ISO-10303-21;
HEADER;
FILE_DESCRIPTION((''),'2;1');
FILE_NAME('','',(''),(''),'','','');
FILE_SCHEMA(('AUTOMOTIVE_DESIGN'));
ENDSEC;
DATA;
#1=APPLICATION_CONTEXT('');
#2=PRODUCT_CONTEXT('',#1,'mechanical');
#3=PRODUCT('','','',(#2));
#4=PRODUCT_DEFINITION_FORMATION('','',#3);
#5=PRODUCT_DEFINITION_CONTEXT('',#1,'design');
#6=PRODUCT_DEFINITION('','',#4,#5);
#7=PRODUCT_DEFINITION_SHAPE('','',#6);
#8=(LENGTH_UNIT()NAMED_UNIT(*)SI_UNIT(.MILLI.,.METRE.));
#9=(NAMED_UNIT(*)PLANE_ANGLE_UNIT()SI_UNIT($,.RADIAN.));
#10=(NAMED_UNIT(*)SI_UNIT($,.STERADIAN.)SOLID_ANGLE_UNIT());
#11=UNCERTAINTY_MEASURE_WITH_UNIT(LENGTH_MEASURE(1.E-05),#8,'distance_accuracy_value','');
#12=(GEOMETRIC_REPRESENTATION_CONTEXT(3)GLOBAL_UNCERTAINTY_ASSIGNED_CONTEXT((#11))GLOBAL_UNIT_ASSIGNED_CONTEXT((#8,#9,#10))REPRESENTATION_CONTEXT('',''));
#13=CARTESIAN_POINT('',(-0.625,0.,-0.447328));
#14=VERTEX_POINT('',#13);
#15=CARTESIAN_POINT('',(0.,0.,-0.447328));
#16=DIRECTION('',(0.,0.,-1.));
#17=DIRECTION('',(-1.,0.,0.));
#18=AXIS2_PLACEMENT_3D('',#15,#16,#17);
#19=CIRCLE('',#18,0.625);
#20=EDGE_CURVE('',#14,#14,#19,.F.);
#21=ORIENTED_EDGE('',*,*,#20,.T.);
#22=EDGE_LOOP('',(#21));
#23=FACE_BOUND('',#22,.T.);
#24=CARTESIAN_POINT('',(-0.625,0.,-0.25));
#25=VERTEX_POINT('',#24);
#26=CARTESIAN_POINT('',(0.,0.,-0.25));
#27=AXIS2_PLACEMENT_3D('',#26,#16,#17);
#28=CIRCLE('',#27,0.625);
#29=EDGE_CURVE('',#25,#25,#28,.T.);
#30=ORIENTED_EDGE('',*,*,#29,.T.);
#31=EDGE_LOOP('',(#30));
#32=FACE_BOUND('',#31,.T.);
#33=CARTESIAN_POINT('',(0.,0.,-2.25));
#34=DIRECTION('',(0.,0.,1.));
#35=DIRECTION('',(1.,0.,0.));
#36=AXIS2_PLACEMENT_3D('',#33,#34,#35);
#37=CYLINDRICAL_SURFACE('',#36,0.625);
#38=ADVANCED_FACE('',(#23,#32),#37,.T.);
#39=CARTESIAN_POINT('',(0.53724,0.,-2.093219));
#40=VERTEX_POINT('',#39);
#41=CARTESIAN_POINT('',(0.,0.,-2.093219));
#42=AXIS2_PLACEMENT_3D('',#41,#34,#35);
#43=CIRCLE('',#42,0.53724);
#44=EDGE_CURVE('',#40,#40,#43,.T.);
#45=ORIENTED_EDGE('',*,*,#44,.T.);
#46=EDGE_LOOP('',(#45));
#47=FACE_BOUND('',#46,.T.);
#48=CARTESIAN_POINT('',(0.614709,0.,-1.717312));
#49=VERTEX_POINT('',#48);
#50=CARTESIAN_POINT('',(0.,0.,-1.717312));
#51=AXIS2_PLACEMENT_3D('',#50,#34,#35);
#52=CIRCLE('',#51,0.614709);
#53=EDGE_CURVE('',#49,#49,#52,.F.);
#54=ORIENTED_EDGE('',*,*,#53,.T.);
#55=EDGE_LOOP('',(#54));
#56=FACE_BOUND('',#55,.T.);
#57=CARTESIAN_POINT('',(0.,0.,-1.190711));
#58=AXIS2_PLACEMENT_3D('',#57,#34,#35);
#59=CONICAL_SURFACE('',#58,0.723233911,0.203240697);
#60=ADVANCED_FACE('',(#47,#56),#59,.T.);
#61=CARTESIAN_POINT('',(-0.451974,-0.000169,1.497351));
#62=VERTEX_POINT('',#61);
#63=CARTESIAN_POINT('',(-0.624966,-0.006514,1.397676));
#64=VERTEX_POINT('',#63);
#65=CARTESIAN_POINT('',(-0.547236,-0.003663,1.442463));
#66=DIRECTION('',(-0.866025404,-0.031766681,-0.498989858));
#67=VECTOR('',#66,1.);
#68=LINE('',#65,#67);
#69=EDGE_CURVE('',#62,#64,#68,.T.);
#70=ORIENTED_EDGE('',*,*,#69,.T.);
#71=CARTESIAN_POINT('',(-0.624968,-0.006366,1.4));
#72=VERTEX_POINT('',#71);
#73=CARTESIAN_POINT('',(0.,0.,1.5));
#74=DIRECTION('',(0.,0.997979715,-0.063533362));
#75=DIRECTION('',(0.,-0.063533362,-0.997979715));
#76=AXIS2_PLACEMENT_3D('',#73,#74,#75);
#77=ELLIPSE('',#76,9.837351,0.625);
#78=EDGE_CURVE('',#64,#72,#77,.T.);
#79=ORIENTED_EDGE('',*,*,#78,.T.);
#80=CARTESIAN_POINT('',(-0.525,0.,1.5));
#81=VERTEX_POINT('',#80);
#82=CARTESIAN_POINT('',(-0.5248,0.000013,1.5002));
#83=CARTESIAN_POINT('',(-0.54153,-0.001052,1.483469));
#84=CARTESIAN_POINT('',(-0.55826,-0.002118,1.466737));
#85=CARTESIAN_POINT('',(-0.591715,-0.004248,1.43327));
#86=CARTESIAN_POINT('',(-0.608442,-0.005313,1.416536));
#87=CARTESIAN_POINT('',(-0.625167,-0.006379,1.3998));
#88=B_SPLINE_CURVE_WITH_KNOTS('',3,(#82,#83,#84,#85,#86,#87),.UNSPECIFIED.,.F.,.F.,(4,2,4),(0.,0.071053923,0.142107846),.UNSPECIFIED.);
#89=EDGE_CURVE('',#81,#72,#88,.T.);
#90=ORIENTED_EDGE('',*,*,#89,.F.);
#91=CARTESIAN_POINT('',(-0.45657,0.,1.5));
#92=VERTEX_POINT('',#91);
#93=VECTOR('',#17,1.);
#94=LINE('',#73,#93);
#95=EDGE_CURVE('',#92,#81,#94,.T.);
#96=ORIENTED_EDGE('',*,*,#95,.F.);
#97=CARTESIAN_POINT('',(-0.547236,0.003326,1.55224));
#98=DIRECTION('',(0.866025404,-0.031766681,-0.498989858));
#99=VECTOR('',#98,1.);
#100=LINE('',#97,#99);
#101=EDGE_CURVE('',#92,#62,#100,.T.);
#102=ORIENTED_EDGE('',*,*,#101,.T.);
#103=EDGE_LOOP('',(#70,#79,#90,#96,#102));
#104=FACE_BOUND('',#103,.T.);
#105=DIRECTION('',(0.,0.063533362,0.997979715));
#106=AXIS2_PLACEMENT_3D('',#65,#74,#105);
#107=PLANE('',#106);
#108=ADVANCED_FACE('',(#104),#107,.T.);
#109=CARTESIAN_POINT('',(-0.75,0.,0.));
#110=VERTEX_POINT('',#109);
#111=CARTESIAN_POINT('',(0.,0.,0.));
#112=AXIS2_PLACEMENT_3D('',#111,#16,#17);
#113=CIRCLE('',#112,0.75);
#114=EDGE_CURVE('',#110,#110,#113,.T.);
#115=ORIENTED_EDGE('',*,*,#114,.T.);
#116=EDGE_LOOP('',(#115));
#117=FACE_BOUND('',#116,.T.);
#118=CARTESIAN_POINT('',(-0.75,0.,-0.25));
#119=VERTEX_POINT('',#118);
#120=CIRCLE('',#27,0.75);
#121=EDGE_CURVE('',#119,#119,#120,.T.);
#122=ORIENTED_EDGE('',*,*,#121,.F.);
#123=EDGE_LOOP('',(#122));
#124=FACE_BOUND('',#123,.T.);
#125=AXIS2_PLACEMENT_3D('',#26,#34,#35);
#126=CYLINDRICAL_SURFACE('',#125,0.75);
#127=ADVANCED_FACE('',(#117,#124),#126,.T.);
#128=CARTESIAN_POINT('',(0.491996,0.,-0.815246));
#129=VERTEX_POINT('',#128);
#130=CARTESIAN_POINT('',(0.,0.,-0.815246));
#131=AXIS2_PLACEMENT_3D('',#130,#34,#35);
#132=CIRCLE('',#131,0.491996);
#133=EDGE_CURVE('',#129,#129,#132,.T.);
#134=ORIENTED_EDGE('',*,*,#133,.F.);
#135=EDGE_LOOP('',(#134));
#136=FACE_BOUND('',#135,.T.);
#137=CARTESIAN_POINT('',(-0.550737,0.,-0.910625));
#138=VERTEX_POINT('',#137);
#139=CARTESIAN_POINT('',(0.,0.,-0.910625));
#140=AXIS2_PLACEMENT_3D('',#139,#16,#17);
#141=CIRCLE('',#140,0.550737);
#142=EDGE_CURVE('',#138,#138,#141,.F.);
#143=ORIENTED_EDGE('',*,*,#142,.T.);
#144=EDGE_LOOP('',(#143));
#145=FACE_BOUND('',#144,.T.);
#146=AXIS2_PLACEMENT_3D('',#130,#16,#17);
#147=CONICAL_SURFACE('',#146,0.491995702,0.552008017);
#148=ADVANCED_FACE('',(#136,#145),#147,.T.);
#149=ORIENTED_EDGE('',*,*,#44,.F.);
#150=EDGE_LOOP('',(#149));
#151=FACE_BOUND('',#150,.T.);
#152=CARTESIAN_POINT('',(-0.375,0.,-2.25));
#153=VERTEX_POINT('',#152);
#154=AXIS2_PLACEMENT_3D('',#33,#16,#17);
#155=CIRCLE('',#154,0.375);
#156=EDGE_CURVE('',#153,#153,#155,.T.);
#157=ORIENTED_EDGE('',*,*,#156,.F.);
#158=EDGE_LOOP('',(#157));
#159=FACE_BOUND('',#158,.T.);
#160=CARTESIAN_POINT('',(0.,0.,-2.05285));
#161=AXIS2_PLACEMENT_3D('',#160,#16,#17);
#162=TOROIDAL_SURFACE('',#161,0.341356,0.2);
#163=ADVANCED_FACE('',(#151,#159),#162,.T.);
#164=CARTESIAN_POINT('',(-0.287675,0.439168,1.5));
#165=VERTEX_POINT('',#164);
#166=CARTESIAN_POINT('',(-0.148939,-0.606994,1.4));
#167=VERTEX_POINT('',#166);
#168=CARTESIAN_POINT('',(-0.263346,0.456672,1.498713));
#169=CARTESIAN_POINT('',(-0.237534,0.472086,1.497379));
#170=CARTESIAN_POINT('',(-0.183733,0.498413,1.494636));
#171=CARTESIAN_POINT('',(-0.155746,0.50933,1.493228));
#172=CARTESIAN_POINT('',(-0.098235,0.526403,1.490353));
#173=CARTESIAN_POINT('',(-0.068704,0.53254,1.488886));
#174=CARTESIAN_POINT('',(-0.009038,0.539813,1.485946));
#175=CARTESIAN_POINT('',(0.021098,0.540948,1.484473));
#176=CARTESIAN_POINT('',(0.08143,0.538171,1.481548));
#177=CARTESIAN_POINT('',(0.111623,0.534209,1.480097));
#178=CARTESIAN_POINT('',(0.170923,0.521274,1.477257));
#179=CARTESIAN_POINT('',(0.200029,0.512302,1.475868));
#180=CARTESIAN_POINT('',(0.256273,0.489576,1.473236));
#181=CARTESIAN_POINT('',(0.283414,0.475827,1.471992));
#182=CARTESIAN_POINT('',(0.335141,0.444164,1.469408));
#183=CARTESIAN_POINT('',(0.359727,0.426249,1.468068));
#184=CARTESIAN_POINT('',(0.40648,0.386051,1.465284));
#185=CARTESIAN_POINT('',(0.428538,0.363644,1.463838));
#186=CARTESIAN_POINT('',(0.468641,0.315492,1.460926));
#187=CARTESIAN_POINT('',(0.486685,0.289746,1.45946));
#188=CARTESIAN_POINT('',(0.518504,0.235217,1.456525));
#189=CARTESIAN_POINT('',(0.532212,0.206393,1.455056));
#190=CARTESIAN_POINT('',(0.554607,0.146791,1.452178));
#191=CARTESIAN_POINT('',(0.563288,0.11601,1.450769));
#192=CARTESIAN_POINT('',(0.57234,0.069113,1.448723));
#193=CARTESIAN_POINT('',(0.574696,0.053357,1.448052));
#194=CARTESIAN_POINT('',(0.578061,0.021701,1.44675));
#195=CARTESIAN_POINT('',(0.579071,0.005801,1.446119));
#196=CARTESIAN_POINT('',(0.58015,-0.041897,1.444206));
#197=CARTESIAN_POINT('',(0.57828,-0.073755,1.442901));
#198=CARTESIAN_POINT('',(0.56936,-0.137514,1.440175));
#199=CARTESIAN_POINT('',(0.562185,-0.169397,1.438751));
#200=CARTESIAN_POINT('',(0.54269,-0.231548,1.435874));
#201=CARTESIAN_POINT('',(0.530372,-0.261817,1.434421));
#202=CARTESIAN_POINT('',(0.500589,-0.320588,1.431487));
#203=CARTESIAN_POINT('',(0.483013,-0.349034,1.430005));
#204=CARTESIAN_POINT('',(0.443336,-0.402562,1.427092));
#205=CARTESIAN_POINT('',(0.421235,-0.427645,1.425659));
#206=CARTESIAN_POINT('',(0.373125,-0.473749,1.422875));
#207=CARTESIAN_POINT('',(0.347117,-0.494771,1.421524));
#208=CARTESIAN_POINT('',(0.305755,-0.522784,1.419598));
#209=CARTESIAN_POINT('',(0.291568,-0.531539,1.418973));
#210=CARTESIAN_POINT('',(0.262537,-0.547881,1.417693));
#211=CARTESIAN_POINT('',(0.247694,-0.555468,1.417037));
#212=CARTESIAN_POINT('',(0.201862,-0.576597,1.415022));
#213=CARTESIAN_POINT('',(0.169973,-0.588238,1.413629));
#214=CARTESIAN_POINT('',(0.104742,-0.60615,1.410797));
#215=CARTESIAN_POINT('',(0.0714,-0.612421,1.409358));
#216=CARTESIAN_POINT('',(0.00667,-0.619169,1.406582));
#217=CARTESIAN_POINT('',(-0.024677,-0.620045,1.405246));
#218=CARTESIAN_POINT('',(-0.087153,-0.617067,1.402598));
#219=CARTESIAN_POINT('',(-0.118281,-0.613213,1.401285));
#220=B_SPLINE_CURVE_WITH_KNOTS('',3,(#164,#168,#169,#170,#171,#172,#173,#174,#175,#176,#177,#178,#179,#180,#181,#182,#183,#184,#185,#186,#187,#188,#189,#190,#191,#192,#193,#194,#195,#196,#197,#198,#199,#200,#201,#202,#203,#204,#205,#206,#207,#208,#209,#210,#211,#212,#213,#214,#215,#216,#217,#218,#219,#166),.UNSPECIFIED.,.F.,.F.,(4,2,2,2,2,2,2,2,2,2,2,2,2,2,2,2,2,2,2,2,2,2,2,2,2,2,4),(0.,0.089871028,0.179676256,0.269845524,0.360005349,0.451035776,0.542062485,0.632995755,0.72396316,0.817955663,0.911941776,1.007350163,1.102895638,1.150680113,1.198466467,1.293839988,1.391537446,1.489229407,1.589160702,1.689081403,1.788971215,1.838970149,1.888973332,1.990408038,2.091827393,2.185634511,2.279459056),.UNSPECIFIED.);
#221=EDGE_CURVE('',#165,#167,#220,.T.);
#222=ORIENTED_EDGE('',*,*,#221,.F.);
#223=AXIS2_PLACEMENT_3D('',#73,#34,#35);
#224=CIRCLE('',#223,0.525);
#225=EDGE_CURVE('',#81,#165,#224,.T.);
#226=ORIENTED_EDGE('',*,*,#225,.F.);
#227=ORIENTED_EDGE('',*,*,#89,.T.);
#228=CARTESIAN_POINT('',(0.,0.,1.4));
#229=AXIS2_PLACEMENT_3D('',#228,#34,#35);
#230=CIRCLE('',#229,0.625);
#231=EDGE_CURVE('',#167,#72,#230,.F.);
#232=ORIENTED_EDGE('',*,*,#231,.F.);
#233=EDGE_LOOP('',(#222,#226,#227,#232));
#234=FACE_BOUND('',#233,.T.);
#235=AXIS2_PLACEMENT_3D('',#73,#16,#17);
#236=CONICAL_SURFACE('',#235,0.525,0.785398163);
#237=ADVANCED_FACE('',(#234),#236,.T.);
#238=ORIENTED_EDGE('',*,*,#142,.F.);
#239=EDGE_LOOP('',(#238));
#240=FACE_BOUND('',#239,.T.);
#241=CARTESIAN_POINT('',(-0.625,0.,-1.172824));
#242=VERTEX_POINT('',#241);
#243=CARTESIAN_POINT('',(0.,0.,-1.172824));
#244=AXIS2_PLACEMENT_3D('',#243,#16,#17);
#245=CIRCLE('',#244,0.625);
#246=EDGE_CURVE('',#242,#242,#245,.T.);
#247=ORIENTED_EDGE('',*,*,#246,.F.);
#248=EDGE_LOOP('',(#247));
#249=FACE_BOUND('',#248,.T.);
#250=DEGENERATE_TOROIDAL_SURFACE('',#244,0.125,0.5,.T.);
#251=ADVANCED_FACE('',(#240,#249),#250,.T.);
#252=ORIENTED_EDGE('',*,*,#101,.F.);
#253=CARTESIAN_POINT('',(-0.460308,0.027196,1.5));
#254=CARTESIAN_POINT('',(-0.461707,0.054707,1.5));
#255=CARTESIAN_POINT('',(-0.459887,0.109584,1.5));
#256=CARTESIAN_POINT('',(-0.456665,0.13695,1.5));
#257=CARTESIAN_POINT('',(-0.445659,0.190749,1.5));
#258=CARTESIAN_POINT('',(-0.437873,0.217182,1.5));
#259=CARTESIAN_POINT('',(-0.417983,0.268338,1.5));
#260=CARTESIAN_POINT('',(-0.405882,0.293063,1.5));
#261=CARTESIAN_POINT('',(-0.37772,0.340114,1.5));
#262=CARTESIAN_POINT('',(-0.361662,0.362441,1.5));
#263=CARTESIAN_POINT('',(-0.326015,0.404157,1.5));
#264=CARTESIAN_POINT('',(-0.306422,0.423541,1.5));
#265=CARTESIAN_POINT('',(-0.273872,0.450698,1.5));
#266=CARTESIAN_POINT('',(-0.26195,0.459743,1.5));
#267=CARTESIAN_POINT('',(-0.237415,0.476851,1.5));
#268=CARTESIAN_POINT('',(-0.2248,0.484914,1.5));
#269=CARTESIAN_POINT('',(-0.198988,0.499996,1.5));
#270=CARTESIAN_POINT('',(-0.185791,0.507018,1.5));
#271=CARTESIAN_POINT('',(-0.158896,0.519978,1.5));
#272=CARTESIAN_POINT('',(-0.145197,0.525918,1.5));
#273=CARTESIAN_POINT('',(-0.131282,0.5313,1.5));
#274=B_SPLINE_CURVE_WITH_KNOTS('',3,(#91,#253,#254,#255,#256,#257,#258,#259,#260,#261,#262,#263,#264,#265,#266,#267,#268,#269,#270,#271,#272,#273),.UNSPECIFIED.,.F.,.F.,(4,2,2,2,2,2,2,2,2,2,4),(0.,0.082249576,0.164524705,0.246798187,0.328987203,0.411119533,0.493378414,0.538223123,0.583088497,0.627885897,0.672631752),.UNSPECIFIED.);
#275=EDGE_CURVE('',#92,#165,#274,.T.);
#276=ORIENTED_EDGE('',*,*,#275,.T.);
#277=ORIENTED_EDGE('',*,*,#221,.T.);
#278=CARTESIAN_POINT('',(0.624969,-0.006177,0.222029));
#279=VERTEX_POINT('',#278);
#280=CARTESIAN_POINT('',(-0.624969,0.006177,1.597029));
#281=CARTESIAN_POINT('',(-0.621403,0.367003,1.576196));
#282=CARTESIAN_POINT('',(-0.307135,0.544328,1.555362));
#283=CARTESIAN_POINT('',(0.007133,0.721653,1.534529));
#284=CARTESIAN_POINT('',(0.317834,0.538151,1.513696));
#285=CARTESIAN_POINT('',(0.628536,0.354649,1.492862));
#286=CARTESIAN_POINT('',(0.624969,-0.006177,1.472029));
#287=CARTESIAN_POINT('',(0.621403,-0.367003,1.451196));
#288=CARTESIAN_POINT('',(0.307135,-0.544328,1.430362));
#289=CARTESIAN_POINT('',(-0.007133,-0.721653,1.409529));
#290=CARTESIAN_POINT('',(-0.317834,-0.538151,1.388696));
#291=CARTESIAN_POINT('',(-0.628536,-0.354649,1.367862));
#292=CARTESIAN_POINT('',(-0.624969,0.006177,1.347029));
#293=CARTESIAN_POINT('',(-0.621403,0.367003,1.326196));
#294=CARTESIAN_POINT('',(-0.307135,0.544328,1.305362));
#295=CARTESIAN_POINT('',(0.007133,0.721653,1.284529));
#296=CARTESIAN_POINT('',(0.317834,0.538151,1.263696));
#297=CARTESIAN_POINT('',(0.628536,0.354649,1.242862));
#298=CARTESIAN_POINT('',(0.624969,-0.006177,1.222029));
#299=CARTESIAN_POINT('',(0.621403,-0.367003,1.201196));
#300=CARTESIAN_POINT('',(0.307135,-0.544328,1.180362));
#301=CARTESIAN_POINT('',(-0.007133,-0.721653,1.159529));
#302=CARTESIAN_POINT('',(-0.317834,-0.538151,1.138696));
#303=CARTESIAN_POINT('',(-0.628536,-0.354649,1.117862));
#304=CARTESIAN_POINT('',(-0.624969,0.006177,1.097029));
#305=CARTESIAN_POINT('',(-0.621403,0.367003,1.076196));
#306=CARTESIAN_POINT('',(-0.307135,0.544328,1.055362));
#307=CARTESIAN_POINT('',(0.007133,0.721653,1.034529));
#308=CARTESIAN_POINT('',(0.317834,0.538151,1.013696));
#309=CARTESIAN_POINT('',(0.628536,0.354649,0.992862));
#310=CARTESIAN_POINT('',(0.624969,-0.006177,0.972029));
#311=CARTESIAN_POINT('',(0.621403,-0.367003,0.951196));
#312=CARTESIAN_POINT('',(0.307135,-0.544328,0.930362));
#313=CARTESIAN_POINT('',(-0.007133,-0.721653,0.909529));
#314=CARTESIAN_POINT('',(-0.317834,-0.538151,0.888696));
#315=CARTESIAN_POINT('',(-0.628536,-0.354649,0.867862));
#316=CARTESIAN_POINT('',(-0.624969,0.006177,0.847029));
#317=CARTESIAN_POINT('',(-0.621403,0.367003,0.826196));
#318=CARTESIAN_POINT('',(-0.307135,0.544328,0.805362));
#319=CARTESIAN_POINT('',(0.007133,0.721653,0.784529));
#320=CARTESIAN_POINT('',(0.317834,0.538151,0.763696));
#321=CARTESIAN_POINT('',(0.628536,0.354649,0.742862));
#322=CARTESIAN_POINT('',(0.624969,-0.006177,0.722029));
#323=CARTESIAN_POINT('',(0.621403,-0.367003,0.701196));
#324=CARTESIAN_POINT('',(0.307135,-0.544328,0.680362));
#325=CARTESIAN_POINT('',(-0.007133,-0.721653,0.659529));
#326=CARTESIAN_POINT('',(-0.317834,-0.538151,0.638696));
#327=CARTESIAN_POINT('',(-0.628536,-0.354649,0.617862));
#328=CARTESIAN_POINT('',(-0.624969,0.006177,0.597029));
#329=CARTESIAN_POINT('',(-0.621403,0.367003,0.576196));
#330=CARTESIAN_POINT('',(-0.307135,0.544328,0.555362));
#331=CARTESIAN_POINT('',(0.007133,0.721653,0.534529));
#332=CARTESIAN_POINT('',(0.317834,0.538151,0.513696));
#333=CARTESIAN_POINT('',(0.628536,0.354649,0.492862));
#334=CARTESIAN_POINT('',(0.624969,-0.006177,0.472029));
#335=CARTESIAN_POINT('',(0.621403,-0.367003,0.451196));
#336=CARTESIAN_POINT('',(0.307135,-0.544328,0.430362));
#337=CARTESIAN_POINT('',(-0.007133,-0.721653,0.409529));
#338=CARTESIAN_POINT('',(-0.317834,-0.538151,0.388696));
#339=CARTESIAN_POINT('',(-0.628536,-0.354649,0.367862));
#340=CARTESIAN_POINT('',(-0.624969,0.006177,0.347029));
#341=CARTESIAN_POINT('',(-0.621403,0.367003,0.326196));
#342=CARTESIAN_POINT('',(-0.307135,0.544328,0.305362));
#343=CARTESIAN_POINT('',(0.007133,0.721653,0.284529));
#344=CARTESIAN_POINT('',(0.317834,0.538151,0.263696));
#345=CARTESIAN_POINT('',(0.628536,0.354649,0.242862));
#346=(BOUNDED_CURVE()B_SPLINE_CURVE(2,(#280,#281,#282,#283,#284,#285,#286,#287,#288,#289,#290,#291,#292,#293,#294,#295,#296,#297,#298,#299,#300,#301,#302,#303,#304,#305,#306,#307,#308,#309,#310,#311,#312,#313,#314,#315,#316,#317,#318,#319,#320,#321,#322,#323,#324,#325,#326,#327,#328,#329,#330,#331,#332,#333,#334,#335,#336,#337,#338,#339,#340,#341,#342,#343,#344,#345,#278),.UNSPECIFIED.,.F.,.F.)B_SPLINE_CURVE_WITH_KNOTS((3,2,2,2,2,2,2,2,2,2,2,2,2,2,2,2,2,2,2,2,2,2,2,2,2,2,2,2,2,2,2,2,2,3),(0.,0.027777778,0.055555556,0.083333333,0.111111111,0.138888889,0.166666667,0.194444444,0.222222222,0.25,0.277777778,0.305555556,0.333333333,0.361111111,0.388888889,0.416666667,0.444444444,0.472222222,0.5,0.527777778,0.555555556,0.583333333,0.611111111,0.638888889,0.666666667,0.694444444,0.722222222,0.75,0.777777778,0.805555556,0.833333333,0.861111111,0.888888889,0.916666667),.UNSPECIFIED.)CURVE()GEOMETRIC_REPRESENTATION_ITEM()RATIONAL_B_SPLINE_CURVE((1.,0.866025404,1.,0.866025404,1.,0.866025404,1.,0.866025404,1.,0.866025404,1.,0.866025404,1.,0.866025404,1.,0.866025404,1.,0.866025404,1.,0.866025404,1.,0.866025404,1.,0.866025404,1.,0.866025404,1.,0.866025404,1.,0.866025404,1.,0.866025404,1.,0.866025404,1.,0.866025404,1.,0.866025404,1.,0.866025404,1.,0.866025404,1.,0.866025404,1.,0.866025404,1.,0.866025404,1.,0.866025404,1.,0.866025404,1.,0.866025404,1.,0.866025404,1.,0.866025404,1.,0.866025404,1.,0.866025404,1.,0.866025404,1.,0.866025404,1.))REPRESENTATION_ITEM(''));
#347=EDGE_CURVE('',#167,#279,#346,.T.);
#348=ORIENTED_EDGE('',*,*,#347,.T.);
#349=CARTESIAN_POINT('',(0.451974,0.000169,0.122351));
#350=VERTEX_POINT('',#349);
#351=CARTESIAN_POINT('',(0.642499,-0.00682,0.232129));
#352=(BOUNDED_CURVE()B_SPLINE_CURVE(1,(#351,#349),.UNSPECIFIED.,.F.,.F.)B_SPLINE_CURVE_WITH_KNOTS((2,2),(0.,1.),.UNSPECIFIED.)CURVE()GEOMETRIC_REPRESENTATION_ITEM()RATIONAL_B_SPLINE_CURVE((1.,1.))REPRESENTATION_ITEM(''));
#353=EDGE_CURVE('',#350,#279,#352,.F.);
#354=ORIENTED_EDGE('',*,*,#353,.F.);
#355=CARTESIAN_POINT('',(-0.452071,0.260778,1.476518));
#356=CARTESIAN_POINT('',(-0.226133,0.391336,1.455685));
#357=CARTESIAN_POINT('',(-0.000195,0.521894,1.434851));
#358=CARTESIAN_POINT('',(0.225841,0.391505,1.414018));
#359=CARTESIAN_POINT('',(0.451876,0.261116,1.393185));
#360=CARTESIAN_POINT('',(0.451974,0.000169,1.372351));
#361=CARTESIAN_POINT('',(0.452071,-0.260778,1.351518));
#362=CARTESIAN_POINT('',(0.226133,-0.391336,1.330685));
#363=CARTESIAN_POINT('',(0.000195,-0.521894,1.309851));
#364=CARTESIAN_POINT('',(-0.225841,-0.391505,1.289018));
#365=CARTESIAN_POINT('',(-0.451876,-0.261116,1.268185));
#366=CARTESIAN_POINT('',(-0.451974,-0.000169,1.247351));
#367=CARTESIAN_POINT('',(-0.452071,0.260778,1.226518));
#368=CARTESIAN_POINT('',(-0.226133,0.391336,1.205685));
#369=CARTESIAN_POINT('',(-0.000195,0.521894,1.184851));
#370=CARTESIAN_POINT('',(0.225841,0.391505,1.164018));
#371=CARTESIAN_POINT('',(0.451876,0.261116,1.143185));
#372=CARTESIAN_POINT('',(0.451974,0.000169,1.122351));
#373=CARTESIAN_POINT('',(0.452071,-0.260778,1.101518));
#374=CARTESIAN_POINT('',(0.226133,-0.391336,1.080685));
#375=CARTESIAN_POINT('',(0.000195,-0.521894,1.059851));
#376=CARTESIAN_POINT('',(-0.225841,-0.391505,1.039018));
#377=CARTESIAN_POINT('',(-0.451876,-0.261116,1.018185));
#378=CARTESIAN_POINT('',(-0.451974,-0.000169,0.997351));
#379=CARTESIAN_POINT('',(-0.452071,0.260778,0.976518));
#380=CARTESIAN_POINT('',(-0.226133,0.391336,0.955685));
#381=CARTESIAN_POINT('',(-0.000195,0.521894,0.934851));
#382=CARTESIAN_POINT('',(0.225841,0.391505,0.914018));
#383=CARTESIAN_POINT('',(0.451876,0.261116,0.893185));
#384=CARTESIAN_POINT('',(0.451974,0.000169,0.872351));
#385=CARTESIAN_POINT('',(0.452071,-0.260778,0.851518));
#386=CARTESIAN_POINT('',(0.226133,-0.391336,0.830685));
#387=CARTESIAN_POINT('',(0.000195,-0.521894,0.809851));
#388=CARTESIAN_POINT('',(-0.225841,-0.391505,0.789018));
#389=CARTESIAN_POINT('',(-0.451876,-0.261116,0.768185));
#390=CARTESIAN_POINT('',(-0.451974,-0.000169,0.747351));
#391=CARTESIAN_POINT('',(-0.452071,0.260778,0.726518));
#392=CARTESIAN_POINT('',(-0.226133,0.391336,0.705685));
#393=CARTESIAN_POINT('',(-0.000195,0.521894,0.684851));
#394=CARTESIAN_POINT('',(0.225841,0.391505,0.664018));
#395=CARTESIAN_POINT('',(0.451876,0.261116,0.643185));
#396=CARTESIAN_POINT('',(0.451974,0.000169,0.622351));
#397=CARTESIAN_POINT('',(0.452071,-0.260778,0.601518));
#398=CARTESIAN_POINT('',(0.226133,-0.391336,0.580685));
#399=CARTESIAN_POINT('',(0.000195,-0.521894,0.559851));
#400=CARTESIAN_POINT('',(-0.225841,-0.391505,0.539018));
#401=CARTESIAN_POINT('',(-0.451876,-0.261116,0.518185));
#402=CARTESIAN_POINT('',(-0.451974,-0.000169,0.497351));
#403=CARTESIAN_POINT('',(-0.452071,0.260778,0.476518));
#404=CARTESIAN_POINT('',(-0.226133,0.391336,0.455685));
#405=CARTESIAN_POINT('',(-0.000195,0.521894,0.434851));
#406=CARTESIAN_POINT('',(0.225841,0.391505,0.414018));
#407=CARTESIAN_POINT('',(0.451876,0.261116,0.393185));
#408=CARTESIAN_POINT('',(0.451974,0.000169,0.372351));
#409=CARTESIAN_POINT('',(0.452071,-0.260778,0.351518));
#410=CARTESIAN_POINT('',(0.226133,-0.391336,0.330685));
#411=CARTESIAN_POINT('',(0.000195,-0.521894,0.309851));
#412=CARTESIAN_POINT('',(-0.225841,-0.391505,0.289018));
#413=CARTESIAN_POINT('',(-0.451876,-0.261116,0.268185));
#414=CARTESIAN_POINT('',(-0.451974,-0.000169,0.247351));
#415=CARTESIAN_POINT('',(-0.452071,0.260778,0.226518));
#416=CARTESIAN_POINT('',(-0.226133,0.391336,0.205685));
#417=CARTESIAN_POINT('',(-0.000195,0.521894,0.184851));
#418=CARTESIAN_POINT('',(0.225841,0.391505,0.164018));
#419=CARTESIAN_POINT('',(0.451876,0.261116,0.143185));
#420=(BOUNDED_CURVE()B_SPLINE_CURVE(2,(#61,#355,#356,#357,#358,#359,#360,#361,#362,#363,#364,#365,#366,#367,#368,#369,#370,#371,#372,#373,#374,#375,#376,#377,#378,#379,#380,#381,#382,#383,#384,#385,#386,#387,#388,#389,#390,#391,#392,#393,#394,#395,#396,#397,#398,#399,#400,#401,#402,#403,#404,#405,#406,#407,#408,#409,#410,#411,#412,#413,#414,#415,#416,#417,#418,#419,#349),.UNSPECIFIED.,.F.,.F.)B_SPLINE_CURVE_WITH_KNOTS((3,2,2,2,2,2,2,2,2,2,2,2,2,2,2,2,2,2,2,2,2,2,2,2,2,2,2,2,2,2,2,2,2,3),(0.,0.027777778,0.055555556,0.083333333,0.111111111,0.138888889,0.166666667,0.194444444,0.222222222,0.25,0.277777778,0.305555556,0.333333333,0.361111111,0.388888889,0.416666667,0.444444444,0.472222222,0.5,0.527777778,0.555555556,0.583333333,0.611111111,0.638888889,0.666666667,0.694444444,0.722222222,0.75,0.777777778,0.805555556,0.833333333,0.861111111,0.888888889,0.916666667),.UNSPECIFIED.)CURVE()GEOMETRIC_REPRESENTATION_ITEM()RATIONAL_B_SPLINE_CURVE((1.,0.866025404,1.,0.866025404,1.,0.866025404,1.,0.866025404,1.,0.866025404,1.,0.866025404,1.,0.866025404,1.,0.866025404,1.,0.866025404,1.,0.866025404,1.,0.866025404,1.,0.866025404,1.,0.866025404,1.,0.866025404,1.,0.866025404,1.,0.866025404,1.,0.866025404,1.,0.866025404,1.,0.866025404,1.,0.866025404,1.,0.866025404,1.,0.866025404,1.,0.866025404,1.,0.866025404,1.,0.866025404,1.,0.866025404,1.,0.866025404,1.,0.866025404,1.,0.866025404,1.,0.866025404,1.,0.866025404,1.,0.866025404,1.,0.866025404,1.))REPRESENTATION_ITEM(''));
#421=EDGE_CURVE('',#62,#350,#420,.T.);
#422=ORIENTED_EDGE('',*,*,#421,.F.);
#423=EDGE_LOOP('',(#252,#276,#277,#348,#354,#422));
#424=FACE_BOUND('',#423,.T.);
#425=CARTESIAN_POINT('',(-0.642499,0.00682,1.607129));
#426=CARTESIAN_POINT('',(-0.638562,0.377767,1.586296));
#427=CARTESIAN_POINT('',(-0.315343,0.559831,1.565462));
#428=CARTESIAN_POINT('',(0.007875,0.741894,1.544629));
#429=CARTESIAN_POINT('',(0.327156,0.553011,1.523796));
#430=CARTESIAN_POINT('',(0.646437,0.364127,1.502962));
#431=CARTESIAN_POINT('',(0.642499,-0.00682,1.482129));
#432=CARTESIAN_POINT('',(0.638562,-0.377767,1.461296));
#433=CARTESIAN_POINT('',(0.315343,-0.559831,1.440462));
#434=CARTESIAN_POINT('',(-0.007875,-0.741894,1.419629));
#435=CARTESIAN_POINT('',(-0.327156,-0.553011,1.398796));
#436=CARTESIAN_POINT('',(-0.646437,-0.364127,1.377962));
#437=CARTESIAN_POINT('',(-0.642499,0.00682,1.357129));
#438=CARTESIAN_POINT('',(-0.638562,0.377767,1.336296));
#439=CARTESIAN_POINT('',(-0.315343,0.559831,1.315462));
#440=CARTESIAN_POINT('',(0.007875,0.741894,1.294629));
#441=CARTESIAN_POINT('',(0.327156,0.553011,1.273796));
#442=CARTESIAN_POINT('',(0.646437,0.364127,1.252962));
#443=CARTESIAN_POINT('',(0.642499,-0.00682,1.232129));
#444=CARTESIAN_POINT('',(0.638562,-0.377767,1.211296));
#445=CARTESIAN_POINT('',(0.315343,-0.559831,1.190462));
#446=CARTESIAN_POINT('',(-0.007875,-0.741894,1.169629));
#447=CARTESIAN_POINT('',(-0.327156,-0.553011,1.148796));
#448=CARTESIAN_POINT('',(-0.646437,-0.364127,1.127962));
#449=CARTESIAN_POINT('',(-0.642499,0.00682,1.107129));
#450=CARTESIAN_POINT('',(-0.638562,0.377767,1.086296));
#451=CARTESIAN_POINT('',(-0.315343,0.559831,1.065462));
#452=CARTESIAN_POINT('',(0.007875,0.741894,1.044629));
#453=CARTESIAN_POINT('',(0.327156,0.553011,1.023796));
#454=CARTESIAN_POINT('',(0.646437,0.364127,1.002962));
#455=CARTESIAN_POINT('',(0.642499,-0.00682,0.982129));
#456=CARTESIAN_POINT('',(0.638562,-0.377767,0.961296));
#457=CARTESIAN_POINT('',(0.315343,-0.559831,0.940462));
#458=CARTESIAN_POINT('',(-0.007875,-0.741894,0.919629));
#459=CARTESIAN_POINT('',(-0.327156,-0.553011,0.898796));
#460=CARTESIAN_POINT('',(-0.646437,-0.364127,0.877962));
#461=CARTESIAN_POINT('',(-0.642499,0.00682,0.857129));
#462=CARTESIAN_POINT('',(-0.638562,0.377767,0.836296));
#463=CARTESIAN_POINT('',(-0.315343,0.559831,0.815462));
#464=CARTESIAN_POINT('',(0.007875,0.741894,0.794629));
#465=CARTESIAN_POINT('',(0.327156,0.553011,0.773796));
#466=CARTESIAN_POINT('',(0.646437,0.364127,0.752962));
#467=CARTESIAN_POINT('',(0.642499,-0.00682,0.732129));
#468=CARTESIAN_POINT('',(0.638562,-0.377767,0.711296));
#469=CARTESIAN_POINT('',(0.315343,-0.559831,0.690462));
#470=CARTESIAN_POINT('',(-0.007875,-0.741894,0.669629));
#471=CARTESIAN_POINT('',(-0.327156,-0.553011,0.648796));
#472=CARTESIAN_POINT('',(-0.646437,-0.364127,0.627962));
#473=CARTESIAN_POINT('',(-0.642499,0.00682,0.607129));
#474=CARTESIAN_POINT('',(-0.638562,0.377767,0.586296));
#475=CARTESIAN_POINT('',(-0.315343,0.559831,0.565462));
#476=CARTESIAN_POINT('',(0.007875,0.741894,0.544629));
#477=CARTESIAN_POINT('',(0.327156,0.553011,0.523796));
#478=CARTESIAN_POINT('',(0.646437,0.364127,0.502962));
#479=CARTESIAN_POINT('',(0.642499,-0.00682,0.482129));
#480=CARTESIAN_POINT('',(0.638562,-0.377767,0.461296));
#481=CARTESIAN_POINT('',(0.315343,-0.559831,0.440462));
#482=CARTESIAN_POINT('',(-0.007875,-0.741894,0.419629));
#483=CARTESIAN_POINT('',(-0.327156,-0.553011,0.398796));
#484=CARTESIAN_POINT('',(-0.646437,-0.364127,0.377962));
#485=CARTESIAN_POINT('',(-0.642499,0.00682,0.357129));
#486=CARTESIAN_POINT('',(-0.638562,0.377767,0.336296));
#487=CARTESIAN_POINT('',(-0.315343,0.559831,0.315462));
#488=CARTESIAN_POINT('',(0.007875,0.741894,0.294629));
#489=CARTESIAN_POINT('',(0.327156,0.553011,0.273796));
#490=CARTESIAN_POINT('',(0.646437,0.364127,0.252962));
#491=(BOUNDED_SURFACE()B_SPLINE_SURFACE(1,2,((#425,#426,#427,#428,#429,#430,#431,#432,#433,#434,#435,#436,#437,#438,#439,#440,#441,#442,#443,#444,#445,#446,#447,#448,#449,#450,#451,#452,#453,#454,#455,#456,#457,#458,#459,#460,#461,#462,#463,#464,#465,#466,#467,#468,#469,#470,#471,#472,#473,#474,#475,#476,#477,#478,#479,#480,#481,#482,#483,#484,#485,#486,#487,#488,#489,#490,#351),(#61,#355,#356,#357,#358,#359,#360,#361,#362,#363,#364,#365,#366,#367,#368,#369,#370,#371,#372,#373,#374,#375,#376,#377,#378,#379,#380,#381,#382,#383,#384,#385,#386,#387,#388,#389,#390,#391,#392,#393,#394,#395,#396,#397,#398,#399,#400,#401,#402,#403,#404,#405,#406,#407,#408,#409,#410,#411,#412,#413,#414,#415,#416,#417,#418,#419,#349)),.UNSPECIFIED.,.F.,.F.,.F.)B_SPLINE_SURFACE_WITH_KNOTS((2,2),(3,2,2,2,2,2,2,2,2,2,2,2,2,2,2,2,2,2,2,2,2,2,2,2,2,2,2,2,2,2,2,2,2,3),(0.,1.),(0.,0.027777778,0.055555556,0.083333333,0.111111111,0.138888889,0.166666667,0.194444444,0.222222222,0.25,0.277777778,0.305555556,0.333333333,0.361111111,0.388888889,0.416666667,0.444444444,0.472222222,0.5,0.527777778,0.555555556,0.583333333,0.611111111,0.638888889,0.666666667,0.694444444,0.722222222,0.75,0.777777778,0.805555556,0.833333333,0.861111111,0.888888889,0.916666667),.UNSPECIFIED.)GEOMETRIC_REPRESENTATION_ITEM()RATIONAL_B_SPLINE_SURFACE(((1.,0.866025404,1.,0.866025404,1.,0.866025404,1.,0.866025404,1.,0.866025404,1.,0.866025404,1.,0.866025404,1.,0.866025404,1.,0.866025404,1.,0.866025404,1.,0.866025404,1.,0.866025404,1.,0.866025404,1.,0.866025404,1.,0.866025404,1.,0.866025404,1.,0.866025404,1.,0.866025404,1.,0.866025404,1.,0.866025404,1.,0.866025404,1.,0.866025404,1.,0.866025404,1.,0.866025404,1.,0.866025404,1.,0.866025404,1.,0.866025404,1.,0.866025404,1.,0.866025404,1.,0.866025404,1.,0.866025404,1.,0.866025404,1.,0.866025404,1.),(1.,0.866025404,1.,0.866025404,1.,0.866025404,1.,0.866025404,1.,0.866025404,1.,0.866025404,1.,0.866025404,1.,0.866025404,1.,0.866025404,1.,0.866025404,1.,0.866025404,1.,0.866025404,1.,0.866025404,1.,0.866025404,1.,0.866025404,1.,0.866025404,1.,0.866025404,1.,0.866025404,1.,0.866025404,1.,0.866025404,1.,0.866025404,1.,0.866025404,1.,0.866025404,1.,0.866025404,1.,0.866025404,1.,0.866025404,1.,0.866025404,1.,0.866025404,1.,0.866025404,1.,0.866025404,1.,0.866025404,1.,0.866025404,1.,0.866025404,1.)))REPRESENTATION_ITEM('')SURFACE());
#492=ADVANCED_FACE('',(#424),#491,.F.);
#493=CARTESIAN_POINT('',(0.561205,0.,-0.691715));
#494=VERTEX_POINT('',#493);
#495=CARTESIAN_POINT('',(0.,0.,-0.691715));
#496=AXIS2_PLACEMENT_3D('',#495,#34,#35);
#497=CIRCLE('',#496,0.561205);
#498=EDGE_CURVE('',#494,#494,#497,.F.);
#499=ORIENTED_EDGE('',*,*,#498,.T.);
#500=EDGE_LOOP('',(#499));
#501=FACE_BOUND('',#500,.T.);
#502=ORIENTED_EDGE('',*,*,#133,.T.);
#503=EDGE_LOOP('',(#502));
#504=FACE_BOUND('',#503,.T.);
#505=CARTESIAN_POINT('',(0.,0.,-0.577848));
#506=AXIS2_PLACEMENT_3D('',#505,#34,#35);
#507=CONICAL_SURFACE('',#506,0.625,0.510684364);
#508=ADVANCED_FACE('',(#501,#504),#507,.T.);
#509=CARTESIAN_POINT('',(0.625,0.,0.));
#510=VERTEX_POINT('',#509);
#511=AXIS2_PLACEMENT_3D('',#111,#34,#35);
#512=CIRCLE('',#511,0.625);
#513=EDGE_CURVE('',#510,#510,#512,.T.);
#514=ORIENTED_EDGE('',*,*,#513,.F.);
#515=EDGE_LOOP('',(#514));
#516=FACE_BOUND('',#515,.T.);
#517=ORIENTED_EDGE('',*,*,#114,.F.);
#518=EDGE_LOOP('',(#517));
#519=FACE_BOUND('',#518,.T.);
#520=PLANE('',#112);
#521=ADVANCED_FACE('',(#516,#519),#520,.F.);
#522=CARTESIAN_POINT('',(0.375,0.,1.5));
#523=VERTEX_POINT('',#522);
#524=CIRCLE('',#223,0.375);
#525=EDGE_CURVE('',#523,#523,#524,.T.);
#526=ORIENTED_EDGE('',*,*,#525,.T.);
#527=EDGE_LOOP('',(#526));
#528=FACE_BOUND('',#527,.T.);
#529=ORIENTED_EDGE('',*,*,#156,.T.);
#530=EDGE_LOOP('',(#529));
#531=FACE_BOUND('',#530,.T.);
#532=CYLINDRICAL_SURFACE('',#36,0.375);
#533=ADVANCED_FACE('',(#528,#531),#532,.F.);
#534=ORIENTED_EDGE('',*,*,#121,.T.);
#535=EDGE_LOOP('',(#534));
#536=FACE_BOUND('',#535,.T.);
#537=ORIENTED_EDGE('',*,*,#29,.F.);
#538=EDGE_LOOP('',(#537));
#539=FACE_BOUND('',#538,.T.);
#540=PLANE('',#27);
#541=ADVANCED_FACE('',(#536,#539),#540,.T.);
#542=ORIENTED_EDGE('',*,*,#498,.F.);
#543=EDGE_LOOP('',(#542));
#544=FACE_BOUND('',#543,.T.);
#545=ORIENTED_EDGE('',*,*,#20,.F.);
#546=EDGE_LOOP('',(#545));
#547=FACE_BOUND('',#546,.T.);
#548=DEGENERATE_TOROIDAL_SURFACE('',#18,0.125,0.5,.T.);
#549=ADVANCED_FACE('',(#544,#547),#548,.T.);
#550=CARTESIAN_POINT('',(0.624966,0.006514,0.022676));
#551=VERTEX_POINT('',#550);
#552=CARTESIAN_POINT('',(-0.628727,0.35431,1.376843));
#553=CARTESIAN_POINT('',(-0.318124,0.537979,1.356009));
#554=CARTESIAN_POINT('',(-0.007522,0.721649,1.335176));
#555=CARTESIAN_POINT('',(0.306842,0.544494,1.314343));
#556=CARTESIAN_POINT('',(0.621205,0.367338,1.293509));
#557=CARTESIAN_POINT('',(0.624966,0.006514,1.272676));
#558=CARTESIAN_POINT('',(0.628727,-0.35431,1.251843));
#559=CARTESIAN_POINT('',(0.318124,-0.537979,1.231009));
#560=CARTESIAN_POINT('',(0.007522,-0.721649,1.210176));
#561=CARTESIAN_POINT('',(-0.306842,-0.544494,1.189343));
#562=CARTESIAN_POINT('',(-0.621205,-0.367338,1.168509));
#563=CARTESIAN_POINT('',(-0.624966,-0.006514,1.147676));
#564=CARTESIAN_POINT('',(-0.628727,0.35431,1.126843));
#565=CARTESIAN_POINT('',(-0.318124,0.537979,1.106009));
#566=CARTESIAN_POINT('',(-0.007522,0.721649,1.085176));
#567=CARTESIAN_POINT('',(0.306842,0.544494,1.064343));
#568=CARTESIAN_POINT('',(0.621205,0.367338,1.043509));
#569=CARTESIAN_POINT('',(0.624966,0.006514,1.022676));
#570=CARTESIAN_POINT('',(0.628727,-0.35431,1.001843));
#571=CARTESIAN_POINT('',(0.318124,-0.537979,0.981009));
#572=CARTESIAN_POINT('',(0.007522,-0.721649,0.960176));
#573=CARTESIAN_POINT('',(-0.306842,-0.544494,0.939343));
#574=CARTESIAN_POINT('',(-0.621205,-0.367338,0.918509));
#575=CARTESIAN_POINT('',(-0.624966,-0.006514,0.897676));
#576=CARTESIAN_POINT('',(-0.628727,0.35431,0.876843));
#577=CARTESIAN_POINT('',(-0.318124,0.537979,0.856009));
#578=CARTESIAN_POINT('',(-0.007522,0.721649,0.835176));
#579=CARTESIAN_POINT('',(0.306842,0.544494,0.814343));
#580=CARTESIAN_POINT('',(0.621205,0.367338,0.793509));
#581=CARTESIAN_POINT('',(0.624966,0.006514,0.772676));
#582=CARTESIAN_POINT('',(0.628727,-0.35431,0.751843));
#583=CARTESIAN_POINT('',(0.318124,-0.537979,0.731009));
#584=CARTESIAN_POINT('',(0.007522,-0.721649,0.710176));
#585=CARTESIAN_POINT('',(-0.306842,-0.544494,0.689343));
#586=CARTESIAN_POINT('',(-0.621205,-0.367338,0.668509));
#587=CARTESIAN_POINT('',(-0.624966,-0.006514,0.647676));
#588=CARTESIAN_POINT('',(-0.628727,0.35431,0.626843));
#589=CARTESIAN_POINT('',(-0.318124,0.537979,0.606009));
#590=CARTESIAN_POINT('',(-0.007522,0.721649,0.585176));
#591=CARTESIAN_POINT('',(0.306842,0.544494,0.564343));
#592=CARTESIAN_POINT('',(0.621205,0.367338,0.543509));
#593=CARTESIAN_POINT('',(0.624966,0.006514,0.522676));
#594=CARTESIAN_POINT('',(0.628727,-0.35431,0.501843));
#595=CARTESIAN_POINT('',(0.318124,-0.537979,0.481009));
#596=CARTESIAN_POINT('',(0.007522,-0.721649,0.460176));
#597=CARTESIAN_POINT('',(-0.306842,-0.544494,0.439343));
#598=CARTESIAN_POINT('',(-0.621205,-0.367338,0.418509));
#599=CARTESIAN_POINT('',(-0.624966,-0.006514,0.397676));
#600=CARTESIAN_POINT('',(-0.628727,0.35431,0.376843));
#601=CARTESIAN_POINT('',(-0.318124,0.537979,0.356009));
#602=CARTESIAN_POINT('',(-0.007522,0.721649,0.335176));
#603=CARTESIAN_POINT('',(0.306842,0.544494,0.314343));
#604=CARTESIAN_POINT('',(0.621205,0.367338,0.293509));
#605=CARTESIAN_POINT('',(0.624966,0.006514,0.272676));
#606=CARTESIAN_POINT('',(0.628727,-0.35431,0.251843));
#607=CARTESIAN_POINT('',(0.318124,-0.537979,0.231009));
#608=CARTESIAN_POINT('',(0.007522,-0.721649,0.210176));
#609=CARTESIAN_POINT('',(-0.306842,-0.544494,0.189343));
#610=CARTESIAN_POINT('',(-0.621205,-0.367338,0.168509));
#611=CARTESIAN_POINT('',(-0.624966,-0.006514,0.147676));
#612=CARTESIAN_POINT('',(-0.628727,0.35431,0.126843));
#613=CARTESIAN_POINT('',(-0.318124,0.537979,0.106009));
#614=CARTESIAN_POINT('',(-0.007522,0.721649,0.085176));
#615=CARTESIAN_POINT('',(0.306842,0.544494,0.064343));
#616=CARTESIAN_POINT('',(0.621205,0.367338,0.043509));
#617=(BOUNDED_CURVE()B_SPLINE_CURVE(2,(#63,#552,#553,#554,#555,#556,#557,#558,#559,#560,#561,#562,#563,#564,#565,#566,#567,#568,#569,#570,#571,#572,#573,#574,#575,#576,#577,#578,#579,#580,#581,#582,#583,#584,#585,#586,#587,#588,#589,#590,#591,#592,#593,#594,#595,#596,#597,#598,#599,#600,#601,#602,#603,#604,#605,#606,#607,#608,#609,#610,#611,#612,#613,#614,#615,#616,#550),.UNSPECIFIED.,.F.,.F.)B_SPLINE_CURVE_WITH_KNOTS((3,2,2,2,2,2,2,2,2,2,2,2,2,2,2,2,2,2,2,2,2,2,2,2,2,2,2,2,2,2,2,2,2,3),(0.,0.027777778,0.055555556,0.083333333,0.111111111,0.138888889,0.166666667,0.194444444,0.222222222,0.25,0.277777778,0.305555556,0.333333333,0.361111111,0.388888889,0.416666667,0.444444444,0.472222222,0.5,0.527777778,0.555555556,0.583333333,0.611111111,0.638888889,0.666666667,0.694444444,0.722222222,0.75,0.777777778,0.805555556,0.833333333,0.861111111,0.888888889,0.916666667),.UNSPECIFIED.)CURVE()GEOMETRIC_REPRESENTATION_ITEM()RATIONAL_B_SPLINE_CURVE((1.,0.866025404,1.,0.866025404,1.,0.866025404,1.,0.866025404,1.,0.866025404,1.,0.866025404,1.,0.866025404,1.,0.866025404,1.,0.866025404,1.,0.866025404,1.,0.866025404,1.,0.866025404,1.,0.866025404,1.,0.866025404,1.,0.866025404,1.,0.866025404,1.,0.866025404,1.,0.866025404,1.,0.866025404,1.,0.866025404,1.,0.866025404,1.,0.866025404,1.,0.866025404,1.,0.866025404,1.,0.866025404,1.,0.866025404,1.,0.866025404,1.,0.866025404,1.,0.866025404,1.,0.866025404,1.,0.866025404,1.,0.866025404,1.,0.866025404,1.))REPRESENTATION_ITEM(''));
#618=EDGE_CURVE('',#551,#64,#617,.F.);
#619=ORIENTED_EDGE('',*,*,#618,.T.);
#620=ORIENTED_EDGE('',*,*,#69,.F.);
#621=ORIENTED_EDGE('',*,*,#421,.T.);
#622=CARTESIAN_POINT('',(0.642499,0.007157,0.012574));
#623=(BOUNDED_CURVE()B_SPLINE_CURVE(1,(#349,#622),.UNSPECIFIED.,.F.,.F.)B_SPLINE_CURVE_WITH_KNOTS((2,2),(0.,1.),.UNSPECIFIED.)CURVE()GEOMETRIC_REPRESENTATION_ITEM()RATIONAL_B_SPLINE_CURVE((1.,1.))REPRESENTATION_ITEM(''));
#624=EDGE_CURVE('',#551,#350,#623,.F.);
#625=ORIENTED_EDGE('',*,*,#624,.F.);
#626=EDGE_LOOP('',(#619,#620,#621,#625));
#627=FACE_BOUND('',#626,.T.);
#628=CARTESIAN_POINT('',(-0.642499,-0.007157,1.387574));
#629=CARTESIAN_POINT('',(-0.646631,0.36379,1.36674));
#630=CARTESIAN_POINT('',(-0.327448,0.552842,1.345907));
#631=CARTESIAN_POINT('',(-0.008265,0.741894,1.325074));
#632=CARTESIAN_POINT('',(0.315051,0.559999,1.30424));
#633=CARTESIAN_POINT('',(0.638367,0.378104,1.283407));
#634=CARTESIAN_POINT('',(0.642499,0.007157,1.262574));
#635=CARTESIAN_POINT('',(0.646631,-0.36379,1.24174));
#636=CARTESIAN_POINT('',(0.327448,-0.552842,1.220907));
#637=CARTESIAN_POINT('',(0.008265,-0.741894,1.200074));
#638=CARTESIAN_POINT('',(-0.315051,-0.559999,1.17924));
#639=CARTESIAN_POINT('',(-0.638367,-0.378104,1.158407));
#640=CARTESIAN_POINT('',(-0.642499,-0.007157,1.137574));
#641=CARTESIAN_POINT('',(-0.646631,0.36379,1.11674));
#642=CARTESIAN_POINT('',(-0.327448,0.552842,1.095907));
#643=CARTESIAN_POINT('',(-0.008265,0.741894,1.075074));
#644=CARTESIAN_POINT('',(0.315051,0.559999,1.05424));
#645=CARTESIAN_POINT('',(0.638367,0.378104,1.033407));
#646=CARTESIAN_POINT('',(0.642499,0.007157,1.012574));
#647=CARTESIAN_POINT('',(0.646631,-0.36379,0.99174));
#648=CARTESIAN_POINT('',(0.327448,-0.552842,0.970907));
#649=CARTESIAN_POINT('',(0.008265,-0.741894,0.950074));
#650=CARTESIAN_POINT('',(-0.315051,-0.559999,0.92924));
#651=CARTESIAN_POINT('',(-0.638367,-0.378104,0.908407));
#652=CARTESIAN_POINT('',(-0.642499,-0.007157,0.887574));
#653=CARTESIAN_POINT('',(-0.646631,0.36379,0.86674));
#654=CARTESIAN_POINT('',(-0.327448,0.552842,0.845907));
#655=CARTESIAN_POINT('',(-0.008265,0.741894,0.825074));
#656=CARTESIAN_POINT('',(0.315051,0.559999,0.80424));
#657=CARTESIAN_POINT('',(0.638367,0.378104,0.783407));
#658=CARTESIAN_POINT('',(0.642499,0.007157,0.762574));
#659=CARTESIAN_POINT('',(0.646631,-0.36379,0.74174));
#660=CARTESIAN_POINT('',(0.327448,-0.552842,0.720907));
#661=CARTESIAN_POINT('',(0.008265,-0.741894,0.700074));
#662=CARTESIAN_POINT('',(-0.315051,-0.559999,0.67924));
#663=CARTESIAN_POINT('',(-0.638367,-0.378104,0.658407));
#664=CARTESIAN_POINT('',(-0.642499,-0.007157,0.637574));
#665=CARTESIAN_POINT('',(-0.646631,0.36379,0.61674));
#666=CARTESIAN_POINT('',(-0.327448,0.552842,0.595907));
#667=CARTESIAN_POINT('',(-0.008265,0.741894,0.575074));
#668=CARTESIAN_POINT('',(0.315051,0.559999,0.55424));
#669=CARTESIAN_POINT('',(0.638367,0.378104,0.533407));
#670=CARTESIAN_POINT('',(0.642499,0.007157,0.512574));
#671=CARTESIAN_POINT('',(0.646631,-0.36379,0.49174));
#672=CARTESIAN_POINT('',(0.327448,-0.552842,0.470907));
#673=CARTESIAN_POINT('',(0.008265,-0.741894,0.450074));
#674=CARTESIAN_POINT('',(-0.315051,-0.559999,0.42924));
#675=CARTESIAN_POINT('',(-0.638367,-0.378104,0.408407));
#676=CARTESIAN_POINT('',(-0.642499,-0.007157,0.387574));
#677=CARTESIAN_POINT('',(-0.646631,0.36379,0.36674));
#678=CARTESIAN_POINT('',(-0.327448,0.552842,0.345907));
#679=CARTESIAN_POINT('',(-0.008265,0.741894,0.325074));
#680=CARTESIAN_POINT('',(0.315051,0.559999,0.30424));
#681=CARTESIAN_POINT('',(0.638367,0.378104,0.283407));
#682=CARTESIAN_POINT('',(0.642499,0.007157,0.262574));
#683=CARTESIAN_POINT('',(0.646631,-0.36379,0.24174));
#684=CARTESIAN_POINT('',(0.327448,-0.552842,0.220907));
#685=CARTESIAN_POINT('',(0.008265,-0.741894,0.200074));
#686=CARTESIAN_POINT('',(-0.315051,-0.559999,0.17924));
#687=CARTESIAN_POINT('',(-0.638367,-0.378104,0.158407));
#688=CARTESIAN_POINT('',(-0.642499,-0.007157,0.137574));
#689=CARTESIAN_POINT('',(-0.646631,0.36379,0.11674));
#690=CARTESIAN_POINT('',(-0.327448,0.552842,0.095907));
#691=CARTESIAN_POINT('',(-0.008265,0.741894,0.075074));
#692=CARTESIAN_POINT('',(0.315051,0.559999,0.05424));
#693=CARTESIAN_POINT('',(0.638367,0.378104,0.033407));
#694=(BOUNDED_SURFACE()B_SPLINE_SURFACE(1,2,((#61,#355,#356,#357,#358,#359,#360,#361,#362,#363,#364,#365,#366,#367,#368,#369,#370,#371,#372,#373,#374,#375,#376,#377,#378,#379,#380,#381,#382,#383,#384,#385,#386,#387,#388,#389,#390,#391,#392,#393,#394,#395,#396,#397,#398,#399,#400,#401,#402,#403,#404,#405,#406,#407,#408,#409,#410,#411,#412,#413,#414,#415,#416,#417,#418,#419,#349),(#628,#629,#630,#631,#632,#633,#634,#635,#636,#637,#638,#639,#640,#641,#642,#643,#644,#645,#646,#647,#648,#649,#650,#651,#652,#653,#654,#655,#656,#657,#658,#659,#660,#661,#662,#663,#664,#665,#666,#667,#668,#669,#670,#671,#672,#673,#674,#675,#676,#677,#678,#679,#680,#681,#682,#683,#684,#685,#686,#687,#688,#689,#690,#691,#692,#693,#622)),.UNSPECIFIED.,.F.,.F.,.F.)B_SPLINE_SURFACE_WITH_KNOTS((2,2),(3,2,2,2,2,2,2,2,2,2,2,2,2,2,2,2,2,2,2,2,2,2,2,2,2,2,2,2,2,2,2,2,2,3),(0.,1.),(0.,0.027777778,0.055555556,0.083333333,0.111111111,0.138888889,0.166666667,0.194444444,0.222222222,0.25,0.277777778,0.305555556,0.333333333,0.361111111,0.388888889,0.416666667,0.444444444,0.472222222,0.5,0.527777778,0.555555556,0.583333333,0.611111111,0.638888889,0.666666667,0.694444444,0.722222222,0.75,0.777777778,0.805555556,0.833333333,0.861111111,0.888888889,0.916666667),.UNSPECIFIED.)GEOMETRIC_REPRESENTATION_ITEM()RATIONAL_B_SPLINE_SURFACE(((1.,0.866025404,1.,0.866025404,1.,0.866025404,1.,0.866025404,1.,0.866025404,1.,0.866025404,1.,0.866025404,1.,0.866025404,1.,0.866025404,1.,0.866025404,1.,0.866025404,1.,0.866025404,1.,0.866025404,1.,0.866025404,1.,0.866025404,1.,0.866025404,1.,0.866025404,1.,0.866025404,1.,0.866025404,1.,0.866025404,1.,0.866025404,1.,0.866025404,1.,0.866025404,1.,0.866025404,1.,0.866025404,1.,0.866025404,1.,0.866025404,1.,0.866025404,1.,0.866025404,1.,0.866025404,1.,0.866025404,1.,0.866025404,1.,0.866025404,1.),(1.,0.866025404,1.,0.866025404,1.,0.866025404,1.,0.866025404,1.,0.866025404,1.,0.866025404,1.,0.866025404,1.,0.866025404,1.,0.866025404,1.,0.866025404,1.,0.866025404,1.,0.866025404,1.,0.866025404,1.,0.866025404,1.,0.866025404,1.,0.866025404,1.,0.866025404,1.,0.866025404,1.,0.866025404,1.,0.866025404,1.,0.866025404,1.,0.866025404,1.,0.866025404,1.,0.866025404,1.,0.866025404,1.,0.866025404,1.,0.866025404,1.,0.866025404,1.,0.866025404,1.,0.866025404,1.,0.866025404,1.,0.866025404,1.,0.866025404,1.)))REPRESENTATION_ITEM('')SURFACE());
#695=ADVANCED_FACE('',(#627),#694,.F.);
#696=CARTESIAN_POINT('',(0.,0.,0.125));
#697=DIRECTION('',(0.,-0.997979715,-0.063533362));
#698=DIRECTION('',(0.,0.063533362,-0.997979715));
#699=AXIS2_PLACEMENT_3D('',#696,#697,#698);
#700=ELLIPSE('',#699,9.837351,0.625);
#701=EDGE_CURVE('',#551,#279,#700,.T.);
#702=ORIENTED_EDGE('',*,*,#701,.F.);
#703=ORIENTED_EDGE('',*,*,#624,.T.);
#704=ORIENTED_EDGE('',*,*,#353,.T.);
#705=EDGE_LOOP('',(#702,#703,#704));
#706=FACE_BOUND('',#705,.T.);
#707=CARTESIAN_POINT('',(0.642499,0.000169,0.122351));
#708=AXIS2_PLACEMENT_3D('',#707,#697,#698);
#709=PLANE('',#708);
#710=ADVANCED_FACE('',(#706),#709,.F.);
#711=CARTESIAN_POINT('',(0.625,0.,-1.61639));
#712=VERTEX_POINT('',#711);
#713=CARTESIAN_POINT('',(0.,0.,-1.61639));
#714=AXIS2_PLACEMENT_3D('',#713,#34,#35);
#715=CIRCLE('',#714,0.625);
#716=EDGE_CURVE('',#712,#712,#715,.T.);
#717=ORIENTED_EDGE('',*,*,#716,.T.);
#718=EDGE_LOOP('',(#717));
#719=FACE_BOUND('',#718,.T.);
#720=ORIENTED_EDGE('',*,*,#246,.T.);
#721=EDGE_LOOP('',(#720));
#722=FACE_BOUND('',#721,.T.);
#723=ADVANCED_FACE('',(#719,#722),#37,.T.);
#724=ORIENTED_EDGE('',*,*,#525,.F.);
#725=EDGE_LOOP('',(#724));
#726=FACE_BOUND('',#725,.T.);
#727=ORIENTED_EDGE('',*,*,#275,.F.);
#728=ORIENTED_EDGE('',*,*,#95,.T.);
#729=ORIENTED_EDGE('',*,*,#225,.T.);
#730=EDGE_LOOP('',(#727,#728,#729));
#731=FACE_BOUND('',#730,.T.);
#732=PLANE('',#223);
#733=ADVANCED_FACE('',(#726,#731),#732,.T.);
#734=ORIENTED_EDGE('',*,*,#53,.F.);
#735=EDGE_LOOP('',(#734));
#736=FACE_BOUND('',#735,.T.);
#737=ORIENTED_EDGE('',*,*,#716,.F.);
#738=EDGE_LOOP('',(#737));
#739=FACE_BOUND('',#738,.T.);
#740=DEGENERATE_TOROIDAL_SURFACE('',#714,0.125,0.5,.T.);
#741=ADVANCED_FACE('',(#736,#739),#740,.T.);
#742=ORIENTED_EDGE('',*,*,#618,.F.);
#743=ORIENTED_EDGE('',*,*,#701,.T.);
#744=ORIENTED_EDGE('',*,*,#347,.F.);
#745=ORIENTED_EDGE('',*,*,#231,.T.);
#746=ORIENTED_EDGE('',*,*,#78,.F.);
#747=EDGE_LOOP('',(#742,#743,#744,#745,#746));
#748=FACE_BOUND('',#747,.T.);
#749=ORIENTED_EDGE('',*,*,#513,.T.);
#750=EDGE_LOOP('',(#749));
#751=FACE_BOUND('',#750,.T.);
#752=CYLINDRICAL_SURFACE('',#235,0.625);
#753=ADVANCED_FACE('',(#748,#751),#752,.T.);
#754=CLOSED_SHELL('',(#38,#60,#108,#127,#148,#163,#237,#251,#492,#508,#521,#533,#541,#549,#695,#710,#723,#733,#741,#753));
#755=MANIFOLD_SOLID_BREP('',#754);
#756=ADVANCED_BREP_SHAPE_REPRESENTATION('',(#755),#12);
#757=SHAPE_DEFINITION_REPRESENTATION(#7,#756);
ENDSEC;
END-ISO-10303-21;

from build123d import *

# Parameters (mm, degrees)
SKETCH1_R              = 0.625
BOSS_EXTRUDE1_DEPTH    = 1.5
SKETCH2_R              = 0.75
BOSS_EXTRUDE2_DEPTH    = 0.25
CHAMFER1_SIZE          = 0.1
CUT_SWEEP1_PITCH       = 0.25
CUT_SWEEP1_HEIGHT      = 1.375
CUT_SWEEP1_RADIUS      = 0.625
BOSS_EXTRUDE3_START    = 2
SKETCH5_R              = 0.625
SKETCH5_R_2            = 0.375
BOSS_EXTRUDE3_DEPTH    = 2
FILLET1_R              = 0.5
FILLET2_R              = 0.2
CUT_EXTRUDE1_START     = -1.75
CUT_EXTRUDE1_OUTLINE_R = 0.375
CUT_EXTRUDE1_DEPTH     = 1.75


# Read off the part's stored shape, not the designer's step: Cut-Extrude1
with BuildPart() as part:
    # Sketch1 → Boss-Extrude1 (new body)
    with BuildSketch(Plane.XY):
        Circle(SKETCH1_R)
    extrude(amount=BOSS_EXTRUDE1_DEPTH)

    # Sketch2 → Boss-Extrude2 (add)
    with BuildSketch(Plane(origin=(0, 0, 0), x_dir=(-1, 0, 0), z_dir=(0, 0, -1))):
        Circle(SKETCH2_R)
    extrude(amount=BOSS_EXTRUDE2_DEPTH)

    # Chamfer1
    chamfer1_edges = [part.edges().sort_by_distance(p)[0] for p in [
        (-0.625, 0, 1.5),
    ]]
    chamfer(chamfer1_edges, length=CHAMFER1_SIZE)

    # Cut-Sweep1: sweep along a helix
    with BuildLine() as cut_sweep1_path:
        Helix(CUT_SWEEP1_PITCH, CUT_SWEEP1_HEIGHT, CUT_SWEEP1_RADIUS, center=(0, 0, 1.5), direction=(0, 0, -1))
    # Sketch4 → Cut-Sweep1 (sweep, cut)
    with BuildSketch(Plane(origin=(-0.625, 0, 1.5), x_dir=(1, 0, 0), z_dir=(-6.65527731272635e-15, 0.9979797151867817, -0.0635333619109695))):
        Polygon((0.173026415, 0.002653966), (-0.017499174, 0.112653966), (-0.017499174, -0.107346034), align=None)
    sweep(path=cut_sweep1_path.line, is_frenet=True, mode=Mode.SUBTRACT)

    # Sketch5 → Boss-Extrude3 (add)
    with BuildSketch(Plane(origin=(0, 0, -0.25), x_dir=(-1, 0, 0), z_dir=(0, 0, -1)).offset(BOSS_EXTRUDE3_START)):
        with Locations(Location((0, 0, 0), (0, 0, 359.41637989))):
            Circle(SKETCH5_R)
        Circle(SKETCH5_R_2, mode=Mode.SUBTRACT)
    extrude(amount=-BOSS_EXTRUDE3_DEPTH)

    # Sketch6 → Cut-Revolve1 (revolve, cut)
    with BuildSketch(Plane(origin=(0, 0, 0), x_dir=(1, 0, 0), z_dir=(0, 1, 0)), mode=Mode.PRIVATE) as cut_revolve1_sk:
        Polygon((-0.394723278, 2.784756525), (-0.723233911, 1.190711172), (-0.491995702, 0.815246115), (-0.625, 0.577847621), (-0.625, 0.25), (-0.84989967, 0.25), (-0.84989967, 2.784756525), align=None)
    revolve(cut_revolve1_sk.sketch.rotate(Axis((0, 0, 0), (0, 0, -1)), 359.41637989), axis=Axis((0, 0, 0), (0, 0, -1)), mode=Mode.SUBTRACT)

    # Fillet1
    fillet1_edges = [part.edges().sort_by_distance(p)[0] for p in [
        (0.624967576, 0.006366198, -0.577847621),
        (0.624967576, 0.006366198, -1.031207251),
        (0.624967576, 0.006366198, -1.667375527),
    ]]
    fillet(fillet1_edges, radius=FILLET1_R)

    # Fillet2
    # the kernel refuses this fillet: 0.2 mm, written as the material it takes off along each edge
    with BuildSketch(Plane(origin=(0, 0, -2.25), x_dir=(-0.9999481222083442, -0.010185916355747606, 0), z_dir=(-0.010185916355747606, 0.9999481222083442, 0))) as fillet2_piece_1:
        with BuildLine():
            CenterArc((0.341356053, 0.197149904), FILLET2_R, 279.68432686, 68.670838966)
            Line((0.375, 0), (0.375672879, -0.003942998))
            ThreePointArc((0.375672879, -0.003942998), (0.439964589, -0.004), (0.504929179, -0.004))
            Line((0.504929179, -0.004), (0.508846849, -0.000807378))
            Line((0.508846849, -0.000807378), (0.541157244, 0.155973651))
            Line((0.541157244, 0.155973651), (0.537239574, 0.156781028))
        make_face()
    revolve(axis=Axis((0, 0, -2.25), (0, 0, 1)), mode=Mode.SUBTRACT)

    # Cut-Extrude1 outline → Cut-Extrude1 (cut)
    with BuildSketch(Plane(origin=(0, 0, -0.25), x_dir=(-1, 0, 0), z_dir=(0, 0, -1)).offset(CUT_EXTRUDE1_START)):
        Circle(CUT_EXTRUDE1_OUTLINE_R)
    extrude(amount=CUT_EXTRUDE1_DEPTH, mode=Mode.SUBTRACT)


solid = part.part
